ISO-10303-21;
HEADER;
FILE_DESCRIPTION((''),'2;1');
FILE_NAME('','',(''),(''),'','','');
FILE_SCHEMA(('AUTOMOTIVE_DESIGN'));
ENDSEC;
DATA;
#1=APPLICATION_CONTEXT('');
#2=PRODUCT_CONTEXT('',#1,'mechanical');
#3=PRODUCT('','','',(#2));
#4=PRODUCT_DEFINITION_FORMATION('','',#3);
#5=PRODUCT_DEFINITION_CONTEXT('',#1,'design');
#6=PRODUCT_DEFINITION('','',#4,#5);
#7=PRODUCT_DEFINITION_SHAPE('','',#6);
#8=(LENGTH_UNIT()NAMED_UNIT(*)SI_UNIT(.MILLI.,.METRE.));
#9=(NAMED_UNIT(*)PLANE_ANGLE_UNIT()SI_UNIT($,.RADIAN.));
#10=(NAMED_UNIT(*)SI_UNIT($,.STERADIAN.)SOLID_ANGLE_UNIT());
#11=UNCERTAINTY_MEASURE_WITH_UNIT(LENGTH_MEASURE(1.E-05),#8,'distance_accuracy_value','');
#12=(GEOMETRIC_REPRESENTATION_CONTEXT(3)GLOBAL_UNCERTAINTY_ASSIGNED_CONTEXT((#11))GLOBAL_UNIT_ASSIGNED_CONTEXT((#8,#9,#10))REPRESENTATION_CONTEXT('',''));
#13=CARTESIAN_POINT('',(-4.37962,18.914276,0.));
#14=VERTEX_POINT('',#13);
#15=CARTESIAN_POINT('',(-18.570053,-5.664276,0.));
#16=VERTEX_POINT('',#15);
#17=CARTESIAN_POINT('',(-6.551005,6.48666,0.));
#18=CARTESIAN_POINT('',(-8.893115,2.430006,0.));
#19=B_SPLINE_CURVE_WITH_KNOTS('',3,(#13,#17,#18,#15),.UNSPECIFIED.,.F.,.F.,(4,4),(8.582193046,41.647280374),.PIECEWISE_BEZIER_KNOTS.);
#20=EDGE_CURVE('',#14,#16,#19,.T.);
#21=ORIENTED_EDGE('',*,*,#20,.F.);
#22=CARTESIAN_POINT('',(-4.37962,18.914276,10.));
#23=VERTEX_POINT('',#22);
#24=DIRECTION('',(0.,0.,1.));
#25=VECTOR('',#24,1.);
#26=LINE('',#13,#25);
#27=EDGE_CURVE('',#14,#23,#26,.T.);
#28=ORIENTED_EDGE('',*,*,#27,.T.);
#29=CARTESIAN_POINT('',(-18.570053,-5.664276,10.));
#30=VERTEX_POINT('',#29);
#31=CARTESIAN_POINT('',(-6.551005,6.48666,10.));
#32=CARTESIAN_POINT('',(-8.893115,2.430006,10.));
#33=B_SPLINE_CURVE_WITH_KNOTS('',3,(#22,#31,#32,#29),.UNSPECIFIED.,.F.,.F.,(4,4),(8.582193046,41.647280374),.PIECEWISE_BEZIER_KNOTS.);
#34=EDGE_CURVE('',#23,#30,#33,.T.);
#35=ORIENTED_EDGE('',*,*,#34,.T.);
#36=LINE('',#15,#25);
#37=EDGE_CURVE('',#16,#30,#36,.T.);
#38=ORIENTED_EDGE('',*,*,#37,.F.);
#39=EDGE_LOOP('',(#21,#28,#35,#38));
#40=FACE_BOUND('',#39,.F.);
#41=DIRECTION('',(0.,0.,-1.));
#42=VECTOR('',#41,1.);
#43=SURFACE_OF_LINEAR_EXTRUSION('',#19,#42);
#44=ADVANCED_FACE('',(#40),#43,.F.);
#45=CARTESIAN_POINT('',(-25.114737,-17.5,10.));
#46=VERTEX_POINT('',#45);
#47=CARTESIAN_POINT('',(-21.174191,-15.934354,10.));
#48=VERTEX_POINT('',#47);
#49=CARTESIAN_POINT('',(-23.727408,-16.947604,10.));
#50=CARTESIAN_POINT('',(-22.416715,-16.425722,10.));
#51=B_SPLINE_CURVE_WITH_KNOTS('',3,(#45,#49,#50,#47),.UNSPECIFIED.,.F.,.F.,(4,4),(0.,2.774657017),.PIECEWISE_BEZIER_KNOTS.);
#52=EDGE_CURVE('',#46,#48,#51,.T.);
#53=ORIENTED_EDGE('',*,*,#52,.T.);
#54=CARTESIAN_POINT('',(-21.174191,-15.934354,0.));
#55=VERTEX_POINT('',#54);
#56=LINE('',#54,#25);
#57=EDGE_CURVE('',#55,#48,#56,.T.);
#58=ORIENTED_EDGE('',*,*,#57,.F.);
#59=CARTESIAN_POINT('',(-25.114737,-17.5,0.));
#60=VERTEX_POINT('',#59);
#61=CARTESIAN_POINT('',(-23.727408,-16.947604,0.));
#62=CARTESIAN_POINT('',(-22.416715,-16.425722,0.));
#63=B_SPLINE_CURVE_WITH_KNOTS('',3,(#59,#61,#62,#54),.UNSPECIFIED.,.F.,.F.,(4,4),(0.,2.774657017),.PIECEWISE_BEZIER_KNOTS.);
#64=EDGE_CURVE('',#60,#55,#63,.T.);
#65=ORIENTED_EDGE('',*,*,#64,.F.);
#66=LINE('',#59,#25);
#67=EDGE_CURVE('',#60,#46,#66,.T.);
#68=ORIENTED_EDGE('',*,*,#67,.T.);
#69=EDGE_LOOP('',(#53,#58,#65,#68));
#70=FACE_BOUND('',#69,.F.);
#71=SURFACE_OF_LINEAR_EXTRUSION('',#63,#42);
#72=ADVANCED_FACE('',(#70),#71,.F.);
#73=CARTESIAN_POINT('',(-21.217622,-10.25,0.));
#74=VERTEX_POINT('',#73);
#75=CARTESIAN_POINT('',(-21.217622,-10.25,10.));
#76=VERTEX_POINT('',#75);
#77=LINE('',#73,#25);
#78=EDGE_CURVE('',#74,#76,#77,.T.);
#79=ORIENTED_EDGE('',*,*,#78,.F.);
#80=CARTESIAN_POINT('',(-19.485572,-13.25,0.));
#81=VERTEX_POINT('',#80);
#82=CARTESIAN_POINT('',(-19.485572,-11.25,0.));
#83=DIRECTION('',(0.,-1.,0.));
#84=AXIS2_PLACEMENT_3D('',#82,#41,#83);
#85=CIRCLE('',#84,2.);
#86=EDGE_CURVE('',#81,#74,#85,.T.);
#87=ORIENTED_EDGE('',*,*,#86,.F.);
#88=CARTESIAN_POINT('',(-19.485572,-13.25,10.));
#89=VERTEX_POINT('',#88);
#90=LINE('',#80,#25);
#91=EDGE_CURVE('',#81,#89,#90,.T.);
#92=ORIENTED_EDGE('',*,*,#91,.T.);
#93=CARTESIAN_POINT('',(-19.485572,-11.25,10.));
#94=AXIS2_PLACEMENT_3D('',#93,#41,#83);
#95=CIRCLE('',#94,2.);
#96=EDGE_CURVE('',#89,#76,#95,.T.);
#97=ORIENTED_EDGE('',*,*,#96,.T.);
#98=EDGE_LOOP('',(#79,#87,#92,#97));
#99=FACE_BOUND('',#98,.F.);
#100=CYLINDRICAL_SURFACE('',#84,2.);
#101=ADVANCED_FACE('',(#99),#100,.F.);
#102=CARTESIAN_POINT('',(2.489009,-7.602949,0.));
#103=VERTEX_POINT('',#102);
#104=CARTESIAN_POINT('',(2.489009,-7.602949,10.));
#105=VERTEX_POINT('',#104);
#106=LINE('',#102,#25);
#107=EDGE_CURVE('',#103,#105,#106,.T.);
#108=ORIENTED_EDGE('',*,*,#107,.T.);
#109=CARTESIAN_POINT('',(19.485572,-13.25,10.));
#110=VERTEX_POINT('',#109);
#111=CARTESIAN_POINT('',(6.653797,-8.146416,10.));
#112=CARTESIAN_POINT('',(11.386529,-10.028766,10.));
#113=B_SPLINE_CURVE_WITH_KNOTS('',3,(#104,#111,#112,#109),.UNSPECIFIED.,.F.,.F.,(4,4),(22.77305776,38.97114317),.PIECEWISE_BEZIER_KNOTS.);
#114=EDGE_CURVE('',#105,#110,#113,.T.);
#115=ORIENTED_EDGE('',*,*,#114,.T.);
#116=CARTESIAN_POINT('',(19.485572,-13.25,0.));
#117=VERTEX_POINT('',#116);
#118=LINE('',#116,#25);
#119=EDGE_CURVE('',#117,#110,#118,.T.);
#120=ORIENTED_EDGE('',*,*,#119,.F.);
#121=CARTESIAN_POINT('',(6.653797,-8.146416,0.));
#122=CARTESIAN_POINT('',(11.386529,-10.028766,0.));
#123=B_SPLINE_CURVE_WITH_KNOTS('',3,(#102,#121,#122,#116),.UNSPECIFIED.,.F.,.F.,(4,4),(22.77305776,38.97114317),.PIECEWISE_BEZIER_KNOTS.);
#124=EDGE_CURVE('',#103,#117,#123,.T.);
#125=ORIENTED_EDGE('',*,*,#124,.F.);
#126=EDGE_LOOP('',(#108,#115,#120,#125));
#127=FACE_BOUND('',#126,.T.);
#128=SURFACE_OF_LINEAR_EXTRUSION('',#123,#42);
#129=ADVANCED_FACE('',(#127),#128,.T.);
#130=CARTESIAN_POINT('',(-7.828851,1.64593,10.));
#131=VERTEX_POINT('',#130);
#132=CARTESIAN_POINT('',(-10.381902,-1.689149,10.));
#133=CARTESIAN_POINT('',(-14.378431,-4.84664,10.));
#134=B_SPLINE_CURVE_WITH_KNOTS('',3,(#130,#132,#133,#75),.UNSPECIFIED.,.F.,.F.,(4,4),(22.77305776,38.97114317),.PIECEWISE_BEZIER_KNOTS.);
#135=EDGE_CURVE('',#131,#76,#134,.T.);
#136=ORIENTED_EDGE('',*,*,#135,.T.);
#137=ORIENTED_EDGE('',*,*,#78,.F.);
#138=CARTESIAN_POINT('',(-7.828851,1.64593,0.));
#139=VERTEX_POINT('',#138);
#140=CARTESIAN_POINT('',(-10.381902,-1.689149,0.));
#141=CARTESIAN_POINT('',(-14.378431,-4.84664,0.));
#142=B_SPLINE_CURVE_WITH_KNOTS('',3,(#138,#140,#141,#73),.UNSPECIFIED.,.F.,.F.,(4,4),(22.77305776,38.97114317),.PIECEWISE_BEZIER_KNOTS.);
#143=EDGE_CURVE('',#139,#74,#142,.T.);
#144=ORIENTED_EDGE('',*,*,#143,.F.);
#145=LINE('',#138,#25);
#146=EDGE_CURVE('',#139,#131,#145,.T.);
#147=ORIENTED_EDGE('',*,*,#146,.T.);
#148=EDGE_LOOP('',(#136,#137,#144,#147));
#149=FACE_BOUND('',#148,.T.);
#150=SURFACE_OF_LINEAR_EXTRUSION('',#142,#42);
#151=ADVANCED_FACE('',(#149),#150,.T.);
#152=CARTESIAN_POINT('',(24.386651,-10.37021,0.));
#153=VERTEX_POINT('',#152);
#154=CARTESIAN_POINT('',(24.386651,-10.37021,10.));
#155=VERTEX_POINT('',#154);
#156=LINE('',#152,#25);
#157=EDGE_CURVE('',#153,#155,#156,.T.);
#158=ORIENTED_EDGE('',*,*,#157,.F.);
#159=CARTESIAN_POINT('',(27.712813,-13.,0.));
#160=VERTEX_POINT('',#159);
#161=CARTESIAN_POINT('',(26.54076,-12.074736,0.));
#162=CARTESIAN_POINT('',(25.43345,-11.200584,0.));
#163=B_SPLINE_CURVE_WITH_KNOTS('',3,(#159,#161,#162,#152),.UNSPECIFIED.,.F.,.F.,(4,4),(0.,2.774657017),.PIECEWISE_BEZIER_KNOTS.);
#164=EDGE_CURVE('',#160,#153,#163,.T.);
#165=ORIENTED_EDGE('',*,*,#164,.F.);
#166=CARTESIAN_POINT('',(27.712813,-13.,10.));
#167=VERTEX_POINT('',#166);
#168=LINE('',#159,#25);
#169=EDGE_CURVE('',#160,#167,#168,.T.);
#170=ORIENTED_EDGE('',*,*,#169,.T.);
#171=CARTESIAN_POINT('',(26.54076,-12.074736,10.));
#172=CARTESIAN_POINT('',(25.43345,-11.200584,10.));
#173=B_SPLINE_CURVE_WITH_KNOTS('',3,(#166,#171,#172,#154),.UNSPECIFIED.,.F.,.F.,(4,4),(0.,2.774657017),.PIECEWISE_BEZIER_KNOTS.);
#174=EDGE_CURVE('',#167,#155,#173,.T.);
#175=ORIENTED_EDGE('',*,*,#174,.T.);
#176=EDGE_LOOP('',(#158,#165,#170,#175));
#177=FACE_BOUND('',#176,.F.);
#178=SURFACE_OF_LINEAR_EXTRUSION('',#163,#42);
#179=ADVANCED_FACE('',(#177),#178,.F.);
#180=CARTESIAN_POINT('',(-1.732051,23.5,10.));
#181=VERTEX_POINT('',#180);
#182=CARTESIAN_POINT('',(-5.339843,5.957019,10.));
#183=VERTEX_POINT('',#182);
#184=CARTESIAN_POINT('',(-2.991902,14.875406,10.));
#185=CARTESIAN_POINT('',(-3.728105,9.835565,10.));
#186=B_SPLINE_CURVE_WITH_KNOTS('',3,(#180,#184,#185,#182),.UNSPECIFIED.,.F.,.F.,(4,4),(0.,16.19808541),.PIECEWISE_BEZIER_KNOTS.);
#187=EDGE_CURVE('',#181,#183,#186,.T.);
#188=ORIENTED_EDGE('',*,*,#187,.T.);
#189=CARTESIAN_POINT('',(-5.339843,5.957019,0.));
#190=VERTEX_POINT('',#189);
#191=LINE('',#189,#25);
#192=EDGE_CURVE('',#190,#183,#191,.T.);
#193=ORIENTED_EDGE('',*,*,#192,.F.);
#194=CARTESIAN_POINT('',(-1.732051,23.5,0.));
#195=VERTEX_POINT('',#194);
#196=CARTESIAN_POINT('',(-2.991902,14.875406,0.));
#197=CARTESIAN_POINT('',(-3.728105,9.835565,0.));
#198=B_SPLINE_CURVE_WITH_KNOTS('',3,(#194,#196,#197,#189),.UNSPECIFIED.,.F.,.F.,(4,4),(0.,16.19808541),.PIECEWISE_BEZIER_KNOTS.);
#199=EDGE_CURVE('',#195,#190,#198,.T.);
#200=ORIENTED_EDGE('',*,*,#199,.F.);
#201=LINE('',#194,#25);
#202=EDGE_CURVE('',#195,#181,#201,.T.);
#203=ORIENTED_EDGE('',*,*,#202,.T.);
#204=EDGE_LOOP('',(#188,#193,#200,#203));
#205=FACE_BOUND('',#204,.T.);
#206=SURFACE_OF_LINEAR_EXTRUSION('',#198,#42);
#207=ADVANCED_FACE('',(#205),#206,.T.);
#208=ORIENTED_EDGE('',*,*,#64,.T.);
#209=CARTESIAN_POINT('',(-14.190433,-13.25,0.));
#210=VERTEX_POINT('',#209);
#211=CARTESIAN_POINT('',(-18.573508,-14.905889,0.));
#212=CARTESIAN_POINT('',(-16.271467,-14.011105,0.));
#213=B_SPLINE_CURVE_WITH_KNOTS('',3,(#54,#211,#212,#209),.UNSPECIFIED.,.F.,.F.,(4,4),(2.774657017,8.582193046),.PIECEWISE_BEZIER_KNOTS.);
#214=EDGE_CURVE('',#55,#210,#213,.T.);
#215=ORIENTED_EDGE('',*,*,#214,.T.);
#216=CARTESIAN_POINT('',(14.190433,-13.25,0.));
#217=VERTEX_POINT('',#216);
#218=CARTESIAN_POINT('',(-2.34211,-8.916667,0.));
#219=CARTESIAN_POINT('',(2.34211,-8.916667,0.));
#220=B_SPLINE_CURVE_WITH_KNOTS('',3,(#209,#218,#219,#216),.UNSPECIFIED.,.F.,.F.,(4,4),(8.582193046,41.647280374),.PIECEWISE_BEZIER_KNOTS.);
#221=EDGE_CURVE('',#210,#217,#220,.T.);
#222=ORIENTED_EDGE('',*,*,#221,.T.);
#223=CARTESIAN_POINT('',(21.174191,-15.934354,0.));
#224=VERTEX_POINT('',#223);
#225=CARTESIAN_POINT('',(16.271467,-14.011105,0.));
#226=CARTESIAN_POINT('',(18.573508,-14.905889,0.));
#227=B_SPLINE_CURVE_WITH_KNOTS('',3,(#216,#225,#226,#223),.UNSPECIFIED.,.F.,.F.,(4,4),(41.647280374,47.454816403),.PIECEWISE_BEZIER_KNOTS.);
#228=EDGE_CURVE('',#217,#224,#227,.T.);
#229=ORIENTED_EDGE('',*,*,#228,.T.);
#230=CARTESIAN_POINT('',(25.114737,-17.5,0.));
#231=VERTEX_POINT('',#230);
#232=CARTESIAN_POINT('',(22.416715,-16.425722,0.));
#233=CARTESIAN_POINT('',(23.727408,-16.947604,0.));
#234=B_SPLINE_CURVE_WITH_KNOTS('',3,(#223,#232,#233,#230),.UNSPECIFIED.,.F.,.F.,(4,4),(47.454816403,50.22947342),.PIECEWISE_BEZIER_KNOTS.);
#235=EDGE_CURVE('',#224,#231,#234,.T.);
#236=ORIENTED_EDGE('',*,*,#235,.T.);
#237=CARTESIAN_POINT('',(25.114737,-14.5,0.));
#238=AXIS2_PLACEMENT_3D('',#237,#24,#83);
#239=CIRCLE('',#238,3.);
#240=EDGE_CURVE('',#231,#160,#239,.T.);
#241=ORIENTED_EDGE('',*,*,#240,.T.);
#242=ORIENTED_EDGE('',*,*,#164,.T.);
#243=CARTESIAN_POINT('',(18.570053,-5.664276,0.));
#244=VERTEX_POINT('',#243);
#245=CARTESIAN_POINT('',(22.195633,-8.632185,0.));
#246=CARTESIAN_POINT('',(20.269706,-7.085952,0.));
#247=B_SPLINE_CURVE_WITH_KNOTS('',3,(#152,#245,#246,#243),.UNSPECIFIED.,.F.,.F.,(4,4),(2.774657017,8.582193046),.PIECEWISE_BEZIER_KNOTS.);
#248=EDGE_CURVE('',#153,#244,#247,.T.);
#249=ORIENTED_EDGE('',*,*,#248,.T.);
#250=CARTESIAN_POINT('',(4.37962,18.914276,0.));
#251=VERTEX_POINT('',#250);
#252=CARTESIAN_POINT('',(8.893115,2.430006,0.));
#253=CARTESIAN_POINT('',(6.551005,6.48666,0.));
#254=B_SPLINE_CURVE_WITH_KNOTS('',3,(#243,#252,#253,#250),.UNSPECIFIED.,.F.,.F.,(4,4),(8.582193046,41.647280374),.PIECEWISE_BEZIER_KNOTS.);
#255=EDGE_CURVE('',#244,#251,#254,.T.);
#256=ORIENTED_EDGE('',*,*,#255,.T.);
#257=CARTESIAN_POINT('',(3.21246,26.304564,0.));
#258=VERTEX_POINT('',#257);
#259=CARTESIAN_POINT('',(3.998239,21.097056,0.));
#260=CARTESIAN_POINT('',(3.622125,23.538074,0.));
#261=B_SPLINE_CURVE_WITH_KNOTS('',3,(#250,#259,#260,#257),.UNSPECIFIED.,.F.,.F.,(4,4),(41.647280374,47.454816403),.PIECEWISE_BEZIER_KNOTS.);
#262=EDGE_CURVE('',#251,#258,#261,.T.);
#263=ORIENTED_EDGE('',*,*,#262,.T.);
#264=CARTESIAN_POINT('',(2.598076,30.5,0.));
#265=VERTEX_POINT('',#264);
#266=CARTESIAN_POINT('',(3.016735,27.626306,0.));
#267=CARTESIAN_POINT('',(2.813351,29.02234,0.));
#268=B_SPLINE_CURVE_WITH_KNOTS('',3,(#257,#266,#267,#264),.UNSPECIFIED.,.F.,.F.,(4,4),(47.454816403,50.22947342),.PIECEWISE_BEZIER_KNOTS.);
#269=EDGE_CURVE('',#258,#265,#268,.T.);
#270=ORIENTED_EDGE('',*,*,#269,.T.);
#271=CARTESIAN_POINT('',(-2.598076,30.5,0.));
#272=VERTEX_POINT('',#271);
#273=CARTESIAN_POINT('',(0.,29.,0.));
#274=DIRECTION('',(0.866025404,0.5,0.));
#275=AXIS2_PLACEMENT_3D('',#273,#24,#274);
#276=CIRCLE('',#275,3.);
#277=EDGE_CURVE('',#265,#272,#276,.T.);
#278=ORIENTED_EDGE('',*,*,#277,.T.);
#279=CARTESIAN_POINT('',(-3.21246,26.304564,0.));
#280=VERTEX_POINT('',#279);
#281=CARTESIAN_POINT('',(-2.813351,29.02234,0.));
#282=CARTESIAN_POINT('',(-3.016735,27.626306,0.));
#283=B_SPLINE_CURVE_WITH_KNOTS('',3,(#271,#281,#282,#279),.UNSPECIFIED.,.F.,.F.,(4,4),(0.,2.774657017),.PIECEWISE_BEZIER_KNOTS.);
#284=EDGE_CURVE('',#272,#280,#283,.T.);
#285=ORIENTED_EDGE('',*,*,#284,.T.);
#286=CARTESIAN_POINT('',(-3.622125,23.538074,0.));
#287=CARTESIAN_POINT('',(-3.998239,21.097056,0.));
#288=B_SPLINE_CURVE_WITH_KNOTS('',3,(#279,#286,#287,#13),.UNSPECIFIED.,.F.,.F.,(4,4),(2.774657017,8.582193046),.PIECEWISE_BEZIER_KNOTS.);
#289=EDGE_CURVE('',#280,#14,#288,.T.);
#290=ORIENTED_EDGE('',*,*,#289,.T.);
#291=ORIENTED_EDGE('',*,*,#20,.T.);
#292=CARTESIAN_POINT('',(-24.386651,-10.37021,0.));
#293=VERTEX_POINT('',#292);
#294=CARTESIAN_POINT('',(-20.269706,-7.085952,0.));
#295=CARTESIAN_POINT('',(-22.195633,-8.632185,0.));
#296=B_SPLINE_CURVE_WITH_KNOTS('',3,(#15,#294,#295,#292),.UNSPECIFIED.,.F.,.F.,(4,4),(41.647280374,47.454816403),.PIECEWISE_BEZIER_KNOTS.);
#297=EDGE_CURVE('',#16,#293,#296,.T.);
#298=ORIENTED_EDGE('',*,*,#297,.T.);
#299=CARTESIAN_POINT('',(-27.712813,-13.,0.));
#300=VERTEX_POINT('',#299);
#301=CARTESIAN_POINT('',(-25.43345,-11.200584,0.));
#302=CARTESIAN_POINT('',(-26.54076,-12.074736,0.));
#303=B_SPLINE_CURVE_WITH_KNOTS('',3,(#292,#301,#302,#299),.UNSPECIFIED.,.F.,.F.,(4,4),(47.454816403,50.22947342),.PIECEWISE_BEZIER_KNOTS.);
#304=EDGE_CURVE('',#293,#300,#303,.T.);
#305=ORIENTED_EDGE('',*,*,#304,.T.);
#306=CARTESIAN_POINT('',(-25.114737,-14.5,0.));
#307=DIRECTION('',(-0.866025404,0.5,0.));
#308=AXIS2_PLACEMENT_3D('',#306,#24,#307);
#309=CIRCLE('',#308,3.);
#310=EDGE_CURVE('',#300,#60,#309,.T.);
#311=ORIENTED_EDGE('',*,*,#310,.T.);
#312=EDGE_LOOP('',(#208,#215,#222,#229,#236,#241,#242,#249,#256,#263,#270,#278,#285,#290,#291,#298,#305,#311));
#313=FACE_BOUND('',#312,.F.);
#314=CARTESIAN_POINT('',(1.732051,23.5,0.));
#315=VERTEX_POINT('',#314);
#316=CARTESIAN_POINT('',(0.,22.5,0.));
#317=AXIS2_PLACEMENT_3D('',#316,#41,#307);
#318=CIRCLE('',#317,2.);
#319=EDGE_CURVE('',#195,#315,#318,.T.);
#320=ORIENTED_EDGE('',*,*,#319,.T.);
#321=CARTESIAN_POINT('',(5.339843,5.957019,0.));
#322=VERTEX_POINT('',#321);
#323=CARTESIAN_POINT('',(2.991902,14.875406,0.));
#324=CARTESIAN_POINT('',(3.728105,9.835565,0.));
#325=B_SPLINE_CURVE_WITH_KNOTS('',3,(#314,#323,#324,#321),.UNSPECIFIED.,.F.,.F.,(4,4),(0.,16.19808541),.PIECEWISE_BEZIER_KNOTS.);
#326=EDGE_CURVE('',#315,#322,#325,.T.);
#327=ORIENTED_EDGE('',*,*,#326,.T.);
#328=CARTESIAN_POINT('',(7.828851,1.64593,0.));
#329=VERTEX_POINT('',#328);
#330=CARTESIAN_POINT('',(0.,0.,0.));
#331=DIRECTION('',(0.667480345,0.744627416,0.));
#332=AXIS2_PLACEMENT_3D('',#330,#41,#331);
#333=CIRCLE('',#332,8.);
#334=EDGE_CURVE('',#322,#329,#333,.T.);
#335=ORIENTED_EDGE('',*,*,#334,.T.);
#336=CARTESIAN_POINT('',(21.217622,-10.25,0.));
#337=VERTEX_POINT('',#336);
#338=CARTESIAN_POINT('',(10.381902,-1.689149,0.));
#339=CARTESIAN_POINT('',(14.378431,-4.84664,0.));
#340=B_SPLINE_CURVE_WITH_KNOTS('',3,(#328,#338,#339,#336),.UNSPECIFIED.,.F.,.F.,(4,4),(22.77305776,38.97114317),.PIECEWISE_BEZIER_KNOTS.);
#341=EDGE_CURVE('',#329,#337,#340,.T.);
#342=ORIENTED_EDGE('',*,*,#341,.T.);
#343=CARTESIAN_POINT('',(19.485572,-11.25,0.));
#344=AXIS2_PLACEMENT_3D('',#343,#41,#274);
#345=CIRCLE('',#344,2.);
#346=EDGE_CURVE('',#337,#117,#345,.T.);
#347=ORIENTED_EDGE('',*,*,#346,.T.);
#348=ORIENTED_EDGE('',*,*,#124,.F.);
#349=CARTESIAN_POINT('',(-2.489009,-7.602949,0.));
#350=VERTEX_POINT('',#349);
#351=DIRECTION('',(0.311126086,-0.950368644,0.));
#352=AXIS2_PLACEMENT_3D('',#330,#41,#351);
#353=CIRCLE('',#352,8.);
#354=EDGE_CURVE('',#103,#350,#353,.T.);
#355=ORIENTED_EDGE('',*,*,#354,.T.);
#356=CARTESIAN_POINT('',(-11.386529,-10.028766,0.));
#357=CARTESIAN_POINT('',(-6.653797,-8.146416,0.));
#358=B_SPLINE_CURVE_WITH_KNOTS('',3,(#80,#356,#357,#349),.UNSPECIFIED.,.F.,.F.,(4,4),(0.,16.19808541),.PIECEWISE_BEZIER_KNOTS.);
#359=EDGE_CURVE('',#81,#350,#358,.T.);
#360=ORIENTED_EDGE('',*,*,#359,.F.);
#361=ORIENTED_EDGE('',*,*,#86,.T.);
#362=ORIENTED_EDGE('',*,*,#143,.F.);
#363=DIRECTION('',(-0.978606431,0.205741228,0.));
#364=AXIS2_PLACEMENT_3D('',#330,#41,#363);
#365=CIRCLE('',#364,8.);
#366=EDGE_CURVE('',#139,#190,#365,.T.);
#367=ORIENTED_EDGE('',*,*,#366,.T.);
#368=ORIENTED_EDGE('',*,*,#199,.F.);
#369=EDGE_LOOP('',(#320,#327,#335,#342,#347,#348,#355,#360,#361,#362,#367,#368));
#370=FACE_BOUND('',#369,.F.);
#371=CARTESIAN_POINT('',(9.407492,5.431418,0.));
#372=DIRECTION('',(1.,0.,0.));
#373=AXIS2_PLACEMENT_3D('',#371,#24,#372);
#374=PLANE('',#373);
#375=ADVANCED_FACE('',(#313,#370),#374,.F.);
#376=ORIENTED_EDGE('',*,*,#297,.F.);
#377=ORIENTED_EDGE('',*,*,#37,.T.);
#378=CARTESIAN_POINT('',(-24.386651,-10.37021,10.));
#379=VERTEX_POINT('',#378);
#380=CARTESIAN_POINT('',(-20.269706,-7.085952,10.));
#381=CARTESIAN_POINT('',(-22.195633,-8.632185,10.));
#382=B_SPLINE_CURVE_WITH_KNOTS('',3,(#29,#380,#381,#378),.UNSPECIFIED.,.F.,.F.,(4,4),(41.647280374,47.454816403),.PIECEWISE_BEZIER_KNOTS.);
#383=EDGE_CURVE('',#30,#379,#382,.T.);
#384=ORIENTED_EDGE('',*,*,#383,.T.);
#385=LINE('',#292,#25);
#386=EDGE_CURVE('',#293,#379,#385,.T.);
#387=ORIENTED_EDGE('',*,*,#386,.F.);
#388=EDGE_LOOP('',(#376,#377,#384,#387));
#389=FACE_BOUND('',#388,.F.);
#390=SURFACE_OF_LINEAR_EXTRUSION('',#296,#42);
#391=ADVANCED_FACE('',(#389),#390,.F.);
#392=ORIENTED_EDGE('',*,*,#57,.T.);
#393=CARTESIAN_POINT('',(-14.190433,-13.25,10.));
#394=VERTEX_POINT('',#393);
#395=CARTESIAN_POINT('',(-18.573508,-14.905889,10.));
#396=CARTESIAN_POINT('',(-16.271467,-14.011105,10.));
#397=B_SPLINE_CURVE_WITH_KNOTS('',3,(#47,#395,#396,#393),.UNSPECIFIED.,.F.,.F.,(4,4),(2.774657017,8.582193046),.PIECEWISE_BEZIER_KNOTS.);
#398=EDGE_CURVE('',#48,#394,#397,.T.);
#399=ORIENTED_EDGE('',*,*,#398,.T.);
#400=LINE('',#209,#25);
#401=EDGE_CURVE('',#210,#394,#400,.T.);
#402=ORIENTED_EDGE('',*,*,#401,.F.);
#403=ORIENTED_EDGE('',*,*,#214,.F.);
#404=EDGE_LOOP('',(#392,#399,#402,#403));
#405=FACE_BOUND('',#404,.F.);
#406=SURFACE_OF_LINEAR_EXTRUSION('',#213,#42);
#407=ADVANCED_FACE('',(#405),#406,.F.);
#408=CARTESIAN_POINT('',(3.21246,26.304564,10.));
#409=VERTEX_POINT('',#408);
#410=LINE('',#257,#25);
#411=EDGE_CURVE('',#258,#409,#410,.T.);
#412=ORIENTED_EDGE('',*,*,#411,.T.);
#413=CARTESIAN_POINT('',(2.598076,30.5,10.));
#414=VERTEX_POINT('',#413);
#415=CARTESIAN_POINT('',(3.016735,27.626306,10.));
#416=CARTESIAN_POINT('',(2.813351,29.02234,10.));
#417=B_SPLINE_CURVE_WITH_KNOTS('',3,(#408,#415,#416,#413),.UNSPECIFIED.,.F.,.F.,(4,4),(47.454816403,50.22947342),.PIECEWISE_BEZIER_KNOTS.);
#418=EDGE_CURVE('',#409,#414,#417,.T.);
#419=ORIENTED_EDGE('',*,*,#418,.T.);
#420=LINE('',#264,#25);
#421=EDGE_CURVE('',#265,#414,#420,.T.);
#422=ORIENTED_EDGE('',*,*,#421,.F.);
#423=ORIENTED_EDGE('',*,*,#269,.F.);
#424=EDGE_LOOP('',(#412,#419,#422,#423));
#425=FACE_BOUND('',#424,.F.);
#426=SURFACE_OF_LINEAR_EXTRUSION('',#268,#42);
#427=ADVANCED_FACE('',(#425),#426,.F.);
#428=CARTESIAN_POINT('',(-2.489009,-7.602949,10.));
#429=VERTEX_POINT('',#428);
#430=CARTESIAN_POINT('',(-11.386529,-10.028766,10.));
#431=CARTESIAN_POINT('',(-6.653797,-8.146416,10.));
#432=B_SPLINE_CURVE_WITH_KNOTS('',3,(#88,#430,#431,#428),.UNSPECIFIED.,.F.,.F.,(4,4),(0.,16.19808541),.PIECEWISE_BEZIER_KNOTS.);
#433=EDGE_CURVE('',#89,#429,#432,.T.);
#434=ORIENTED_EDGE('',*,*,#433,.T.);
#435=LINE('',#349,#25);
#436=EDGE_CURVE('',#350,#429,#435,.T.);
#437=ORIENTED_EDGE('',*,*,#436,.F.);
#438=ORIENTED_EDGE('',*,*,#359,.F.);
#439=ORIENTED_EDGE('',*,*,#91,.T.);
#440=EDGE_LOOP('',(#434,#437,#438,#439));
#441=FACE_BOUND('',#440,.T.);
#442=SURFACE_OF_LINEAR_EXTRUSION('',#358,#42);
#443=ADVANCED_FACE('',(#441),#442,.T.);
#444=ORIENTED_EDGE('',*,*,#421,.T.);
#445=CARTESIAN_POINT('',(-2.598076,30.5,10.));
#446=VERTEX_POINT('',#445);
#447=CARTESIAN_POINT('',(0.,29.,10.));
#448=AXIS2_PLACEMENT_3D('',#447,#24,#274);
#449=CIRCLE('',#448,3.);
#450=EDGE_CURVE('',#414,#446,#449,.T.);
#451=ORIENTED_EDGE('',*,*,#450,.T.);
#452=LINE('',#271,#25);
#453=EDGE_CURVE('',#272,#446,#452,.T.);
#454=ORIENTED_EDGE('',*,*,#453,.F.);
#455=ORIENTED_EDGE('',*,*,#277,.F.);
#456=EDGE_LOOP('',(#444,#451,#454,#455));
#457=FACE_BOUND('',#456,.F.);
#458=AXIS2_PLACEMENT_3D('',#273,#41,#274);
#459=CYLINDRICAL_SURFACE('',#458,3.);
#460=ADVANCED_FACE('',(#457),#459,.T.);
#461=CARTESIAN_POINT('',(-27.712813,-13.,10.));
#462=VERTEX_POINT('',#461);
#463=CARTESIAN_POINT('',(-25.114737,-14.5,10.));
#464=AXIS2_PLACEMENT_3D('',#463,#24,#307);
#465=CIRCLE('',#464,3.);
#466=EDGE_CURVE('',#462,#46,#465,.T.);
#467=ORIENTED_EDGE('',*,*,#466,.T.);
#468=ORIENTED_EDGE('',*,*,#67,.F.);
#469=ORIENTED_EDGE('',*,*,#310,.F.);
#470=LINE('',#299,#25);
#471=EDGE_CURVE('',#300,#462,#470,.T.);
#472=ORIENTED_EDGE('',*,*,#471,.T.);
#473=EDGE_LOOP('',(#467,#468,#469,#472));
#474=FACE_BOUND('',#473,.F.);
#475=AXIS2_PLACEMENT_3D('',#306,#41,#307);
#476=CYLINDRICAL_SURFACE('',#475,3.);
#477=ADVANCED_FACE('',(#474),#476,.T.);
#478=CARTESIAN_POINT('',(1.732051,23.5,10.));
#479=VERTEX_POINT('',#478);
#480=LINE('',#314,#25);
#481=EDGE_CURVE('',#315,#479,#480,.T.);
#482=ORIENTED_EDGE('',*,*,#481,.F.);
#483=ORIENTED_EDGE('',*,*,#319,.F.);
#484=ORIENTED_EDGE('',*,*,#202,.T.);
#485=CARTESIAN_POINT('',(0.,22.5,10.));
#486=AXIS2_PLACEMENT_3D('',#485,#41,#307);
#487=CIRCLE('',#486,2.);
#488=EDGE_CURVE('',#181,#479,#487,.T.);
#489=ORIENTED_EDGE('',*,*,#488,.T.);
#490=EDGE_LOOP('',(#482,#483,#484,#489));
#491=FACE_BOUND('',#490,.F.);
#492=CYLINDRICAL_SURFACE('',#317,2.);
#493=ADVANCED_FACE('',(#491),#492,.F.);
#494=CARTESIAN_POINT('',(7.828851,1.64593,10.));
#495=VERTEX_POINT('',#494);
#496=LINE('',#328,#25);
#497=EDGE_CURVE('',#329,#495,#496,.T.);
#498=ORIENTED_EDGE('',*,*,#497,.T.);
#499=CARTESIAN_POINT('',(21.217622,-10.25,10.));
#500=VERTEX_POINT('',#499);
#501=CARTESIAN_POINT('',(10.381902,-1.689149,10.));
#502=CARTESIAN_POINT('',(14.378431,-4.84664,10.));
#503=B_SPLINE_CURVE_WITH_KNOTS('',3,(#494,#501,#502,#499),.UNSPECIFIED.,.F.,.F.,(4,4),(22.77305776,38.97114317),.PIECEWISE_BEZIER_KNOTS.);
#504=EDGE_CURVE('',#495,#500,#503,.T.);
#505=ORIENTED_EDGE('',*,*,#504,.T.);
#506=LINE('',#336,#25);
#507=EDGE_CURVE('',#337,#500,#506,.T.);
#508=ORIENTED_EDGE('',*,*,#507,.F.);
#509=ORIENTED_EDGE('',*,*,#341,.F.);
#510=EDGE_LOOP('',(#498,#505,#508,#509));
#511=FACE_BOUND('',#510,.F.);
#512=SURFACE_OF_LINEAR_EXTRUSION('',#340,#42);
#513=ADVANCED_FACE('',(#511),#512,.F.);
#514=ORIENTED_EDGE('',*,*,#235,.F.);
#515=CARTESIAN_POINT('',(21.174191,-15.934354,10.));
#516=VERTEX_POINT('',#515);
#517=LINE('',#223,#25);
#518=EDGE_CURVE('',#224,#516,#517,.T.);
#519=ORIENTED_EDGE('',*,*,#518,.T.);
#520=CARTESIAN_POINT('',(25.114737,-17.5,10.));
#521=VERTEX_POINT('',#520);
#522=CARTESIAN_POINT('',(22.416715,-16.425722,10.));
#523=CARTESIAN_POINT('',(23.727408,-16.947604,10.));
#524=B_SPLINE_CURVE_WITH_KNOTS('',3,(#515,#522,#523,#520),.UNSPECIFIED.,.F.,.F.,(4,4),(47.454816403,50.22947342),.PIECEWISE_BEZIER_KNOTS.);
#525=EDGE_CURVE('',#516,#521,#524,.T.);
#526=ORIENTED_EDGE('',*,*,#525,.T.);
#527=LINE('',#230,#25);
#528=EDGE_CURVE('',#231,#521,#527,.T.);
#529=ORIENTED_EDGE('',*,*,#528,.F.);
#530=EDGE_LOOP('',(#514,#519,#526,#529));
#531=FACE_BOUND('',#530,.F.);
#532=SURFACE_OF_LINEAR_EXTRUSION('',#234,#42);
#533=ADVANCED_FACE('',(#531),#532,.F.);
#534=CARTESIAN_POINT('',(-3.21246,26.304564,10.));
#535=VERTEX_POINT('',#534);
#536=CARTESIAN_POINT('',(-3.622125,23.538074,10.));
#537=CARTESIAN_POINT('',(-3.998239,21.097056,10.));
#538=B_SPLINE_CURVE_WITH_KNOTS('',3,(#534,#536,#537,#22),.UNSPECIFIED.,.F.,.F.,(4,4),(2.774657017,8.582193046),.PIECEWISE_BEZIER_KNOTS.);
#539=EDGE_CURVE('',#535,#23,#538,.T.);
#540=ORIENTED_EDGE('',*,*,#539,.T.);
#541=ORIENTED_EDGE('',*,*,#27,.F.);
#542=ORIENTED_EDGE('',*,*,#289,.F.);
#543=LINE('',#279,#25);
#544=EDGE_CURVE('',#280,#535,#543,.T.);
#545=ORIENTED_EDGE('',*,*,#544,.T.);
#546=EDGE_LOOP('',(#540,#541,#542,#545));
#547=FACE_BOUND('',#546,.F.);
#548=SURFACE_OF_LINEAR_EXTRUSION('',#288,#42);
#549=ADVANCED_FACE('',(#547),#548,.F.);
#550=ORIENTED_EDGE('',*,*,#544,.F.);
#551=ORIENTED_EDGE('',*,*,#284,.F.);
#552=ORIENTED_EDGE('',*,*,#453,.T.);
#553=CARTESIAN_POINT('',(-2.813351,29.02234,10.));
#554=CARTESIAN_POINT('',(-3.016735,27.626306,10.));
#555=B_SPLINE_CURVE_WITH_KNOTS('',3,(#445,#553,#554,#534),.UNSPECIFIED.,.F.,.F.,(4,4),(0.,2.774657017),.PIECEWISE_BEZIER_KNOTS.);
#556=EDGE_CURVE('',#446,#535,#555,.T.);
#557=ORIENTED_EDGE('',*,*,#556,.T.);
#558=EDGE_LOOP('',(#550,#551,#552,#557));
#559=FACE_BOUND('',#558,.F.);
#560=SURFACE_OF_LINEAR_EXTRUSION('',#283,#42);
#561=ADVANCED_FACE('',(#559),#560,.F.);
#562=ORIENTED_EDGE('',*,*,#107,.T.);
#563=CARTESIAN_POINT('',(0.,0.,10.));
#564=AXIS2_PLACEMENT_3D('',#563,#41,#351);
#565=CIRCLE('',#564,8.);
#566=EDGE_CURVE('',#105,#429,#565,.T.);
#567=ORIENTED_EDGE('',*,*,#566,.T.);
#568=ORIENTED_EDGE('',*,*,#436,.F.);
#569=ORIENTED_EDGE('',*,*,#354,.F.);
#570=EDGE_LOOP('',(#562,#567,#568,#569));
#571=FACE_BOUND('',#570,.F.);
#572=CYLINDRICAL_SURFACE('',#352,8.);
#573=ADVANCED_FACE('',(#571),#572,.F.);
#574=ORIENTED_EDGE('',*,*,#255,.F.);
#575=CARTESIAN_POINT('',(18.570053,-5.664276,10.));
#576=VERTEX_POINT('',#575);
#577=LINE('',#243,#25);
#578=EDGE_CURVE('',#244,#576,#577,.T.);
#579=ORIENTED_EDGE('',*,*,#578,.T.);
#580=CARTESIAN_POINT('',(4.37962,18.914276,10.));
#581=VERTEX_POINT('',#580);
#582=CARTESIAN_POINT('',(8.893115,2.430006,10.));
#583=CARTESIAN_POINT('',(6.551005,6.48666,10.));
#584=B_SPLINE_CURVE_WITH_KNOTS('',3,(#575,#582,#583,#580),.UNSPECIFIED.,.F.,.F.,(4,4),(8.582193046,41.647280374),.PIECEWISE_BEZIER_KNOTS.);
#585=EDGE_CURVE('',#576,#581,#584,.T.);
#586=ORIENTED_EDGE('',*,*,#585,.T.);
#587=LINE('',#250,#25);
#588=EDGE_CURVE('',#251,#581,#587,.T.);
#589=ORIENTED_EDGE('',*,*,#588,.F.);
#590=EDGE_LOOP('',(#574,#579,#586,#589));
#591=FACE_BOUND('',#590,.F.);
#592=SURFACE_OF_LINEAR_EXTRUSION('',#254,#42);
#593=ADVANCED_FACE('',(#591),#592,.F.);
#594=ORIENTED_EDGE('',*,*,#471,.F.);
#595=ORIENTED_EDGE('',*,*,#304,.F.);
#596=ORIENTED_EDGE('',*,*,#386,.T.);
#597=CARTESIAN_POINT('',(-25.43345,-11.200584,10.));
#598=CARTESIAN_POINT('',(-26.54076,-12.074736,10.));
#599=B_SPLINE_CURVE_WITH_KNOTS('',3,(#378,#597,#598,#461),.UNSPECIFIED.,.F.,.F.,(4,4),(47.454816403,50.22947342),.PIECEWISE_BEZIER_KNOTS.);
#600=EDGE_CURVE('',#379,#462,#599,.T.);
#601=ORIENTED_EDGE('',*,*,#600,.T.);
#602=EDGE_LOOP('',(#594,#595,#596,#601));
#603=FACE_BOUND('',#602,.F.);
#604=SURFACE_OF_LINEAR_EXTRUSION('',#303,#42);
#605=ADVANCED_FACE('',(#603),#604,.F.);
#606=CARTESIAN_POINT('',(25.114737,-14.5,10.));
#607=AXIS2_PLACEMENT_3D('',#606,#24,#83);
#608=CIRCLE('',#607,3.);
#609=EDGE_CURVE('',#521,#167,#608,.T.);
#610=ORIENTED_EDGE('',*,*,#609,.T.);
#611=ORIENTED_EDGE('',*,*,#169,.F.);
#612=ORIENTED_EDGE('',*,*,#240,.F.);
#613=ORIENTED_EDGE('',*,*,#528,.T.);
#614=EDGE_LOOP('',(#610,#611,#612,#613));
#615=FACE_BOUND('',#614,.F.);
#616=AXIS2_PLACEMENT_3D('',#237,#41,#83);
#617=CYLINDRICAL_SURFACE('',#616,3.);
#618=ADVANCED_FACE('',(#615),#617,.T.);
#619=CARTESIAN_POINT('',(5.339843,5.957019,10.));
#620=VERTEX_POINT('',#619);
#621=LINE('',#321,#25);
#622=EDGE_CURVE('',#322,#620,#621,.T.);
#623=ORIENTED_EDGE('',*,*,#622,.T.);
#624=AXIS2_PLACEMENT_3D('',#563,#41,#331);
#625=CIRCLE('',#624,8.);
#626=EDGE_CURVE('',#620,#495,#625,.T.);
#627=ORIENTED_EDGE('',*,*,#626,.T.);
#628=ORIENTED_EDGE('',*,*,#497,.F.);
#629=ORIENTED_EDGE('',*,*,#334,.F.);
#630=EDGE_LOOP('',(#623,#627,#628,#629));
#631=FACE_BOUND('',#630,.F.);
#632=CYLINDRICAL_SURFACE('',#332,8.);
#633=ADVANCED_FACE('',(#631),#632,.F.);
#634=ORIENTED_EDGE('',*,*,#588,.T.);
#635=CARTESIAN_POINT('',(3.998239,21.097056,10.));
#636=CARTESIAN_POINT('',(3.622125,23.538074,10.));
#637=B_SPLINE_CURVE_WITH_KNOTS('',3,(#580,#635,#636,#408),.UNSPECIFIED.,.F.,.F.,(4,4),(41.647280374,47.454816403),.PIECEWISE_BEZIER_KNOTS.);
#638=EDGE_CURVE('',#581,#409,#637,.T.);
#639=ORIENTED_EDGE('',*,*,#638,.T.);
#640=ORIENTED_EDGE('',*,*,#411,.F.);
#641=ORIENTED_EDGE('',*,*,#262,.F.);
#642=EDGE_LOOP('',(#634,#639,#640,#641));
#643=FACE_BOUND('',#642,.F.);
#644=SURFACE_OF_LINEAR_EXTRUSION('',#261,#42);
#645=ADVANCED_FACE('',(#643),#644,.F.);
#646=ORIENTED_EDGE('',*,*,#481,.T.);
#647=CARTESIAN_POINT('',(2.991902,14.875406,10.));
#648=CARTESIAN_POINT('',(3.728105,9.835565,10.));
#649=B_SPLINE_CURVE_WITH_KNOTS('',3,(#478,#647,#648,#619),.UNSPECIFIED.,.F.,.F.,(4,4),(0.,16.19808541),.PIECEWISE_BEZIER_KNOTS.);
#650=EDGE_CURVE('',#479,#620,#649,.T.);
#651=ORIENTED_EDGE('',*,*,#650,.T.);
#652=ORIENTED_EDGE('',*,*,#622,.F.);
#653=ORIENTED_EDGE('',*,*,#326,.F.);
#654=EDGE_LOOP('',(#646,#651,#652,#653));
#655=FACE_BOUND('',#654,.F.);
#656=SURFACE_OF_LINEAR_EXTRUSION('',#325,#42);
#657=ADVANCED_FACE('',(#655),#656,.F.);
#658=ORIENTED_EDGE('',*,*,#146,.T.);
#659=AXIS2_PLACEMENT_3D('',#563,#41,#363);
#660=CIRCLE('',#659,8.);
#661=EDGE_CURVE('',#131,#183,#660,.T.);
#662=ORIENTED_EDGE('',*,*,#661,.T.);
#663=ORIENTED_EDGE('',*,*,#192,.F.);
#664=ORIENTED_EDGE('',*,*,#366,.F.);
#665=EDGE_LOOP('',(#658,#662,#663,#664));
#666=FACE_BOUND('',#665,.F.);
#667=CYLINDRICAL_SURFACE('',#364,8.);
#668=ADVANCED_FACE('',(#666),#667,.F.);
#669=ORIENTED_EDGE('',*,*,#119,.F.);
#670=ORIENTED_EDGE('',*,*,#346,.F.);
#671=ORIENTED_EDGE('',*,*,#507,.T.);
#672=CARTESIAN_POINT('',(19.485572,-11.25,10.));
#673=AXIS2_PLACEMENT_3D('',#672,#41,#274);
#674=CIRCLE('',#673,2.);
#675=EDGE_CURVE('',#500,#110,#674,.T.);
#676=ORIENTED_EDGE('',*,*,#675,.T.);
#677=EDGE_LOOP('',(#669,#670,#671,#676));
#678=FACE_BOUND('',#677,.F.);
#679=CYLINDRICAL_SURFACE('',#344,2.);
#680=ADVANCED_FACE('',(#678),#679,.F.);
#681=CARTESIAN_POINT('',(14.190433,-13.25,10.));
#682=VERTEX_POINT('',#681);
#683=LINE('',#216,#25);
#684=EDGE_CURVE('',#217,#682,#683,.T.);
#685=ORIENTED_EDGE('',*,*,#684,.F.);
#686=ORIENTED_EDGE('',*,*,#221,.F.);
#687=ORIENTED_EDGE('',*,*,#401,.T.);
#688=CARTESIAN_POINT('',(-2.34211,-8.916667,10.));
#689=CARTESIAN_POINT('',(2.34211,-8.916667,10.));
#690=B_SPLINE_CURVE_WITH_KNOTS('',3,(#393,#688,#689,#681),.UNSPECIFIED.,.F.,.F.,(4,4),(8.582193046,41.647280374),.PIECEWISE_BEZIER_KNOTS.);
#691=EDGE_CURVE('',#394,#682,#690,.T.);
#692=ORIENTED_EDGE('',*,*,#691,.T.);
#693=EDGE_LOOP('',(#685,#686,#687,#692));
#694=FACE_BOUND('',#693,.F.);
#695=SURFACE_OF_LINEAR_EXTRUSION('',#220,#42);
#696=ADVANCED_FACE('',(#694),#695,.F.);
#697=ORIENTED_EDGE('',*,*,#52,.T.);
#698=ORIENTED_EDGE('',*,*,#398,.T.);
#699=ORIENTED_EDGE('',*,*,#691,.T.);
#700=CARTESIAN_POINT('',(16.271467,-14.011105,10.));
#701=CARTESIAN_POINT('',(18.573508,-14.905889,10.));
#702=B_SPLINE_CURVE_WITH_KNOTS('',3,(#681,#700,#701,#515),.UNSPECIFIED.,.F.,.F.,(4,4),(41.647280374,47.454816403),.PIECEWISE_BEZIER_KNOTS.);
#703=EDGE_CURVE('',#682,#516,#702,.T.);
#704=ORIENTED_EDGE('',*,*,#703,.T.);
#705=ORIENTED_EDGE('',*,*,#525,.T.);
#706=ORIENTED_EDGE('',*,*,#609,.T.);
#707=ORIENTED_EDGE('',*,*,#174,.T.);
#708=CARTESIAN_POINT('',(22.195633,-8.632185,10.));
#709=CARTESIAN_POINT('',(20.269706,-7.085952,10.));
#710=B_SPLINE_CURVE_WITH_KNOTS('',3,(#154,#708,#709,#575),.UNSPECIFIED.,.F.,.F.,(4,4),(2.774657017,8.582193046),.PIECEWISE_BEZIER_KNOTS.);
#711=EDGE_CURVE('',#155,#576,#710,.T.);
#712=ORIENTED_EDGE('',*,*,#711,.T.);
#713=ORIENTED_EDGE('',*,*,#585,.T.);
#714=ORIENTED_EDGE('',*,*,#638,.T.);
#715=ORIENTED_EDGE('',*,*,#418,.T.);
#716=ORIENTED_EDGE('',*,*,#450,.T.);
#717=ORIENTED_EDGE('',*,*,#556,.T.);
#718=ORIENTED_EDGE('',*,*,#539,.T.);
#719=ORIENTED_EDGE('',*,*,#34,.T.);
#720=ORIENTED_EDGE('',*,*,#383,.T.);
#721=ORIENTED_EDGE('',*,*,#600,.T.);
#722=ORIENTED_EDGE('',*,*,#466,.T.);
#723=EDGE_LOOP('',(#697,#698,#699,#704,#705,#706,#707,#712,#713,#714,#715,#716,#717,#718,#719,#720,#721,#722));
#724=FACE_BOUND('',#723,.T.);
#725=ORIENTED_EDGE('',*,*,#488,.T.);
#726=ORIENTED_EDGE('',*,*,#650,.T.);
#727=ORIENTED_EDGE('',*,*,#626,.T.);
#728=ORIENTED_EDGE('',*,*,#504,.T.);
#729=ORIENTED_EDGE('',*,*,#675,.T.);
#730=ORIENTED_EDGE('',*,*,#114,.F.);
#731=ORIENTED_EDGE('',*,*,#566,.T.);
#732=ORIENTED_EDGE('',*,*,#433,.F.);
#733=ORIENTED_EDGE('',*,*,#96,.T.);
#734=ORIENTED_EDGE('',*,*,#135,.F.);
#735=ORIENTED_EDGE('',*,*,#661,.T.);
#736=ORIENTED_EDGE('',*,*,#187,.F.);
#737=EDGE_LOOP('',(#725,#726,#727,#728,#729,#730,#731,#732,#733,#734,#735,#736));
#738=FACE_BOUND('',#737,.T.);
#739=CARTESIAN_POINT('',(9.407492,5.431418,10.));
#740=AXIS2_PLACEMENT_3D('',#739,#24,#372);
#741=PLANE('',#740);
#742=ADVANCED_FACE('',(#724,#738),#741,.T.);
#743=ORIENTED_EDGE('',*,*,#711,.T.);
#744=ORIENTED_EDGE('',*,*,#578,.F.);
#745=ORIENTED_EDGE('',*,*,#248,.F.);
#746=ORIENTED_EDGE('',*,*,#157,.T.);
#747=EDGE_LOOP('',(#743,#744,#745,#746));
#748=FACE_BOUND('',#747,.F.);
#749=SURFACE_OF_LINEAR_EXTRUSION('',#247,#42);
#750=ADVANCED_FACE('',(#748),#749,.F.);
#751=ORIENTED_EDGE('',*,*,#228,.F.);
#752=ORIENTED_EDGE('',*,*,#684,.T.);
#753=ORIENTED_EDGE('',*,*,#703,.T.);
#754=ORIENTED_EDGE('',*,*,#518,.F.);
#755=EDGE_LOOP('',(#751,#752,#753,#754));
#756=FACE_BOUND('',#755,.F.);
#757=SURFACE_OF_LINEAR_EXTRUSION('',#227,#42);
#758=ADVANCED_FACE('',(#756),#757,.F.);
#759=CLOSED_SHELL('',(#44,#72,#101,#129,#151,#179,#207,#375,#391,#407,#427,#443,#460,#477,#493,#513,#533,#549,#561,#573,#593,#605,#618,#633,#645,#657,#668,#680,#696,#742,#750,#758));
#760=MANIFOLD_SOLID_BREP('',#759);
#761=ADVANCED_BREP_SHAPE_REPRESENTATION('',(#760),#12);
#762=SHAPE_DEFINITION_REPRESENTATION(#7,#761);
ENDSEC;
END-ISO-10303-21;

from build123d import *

# Parameters (mm, degrees)
F1_DEPTH = 10


# Not quite as in the source:
# - a feature of the source that left no trace in its solid (it failed there, or was rolled back) is left out


with BuildPart() as f1:
    # F0 (on Top) → F1 (new body)
    with BuildSketch(Plane.XY):
        with BuildLine():
            ThreePointArc((5.3398427629, 5.9570193274), (6.9282032303, 4), (7.8288514498, 1.6459298212))
            add(Edge.make_bspline(
                [(7.8288514498, 1.6459298212), (10.3819017266, -1.689149351), (14.3784307752, -4.8466401497), (21.2176223927, -10.25)],
                knots=[22.7730577605, 22.7730577605, 22.7730577605, 22.7730577605, 38.9711431703, 38.9711431703, 38.9711431703, 38.9711431703], degree=3))
            Line((21.2176223927, -10.25), (18.5700532559, -5.6642757385))
            add(Edge.make_bspline(
                [(18.5700532559, -5.6642757385), (8.8931150266, 2.4300062697), (6.5510046742, 6.486660397), (4.3796199444, 18.9142757385)],
                knots=[8.5821930458, 8.5821930458, 8.5821930458, 8.5821930458, 41.6472803737, 41.6472803737, 41.6472803737, 41.6472803737], degree=3))
            Line((4.3796199444, 18.9142757385), (1.7320508076, 23.5))
            add(Edge.make_bspline(
                [(1.7320508076, 23.5), (2.991901895, 14.8754063927), (3.7281046145, 9.8355653103), (5.3398427629, 5.9570193274)],
                knots=[0, 0, 0, 0, 16.1980854098, 16.1980854098, 16.1980854098, 16.1980854098], degree=3))
        make_face()
        with BuildLine():
            add(Edge.make_bspline(
                [(2.4890086869, -7.6029491486), (6.6537971121, -8.1464159593), (11.3865288802, -10.0287662431), (19.4855715851, -13.25)],
                knots=[22.7730577605, 22.7730577605, 22.7730577605, 22.7730577605, 38.9711431703, 38.9711431703, 38.9711431703, 38.9711431703], degree=3))
            ThreePointArc((2.4890086869, -7.6029491486), (0, -8), (-2.4890086869, -7.6029491486))
            add(Edge.make_bspline(
                [(-19.4855715852, -13.25), (-11.3865288802, -10.0287662431), (-6.6537971121, -8.1464159593), (-2.4890086869, -7.6029491486)],
                knots=[0, 0, 0, 0, 16.1980854098, 16.1980854098, 16.1980854098, 16.1980854098], degree=3))
            Line((-19.4855715852, -13.25), (-14.1904333115, -13.25))
            add(Edge.make_bspline(
                [(-14.1904333115, -13.25), (-2.3421103524, -8.9166666667), (2.3421103524, -8.9166666667), (14.1904333115, -13.25)],
                knots=[8.5821930458, 8.5821930458, 8.5821930458, 8.5821930458, 41.6472803737, 41.6472803737, 41.6472803737, 41.6472803737], degree=3))
            Line((14.1904333115, -13.25), (19.4855715851, -13.25))
        make_face()
        with BuildLine():
            Line((18.5700532559, -5.6642757385), (21.2176223927, -10.25))
            ThreePointArc((21.2176223927, -10.25), (21.2176223927, -12.25), (19.4855715851, -13.25))
            Line((19.4855715851, -13.25), (14.1904333115, -13.25))
            add(Edge.make_bspline(
                [(14.1904333115, -13.25), (16.2714670553, -14.0111045817), (18.573507913, -14.9058892059), (21.174191051, -15.9343538726)],
                knots=[41.6472803737, 41.6472803737, 41.6472803737, 41.6472803737, 47.4548164026, 47.4548164026, 47.4548164026, 47.4548164026], degree=3))
            ThreePointArc((21.174191051, -15.9343538726), (22.9496732003, -13.25), (24.386650772, -10.3702104184))
            add(Edge.make_bspline(
                [(24.386650772, -10.3702104184), (22.1956326748, -8.6321850871), (20.2697060304, -7.0859515359), (18.5700532559, -5.6642757385)],
                knots=[2.7746570169, 2.7746570169, 2.7746570169, 2.7746570169, 8.5821930458, 8.5821930458, 8.5821930458, 8.5821930458], degree=3))
        make_face()
        with BuildLine():
            ThreePointArc((-7.8288514498, 1.6459298212), (-6.9282032303, 4), (-5.3398427629, 5.9570193274))
            add(Edge.make_bspline(
                [(-1.7320508076, 23.5), (-2.991901895, 14.8754063927), (-3.7281046145, 9.8355653103), (-5.3398427629, 5.9570193274)],
                knots=[0, 0, 0, 0, 16.1980854098, 16.1980854098, 16.1980854098, 16.1980854098], degree=3))
            Line((-1.7320508076, 23.5), (-4.3796199444, 18.9142757385))
            add(Edge.make_bspline(
                [(-4.3796199444, 18.9142757385), (-6.5510046742, 6.486660397), (-8.8931150266, 2.4300062697), (-18.5700532559, -5.6642757385)],
                knots=[8.5821930458, 8.5821930458, 8.5821930458, 8.5821930458, 41.6472803737, 41.6472803737, 41.6472803737, 41.6472803737], degree=3))
            Line((-18.5700532559, -5.6642757385), (-21.2176223927, -10.25))
            add(Edge.make_bspline(
                [(-7.8288514498, 1.6459298212), (-10.3819017266, -1.689149351), (-14.3784307752, -4.8466401497), (-21.2176223927, -10.25)],
                knots=[22.7730577605, 22.7730577605, 22.7730577605, 22.7730577605, 38.9711431703, 38.9711431703, 38.9711431703, 38.9711431703], degree=3))
        make_face()
        with BuildLine():
            ThreePointArc((-1.7320508076, 23.5), (0, 24.5), (1.7320508076, 23.5))
            Line((1.7320508076, 23.5), (4.3796199444, 18.9142757385))
            add(Edge.make_bspline(
                [(4.3796199444, 18.9142757385), (3.9982389752, 21.0970561175), (3.6221247618, 23.5380742929), (3.2124597211, 26.304564291)],
                knots=[41.6472803737, 41.6472803737, 41.6472803737, 41.6472803737, 47.4548164026, 47.4548164026, 47.4548164026, 47.4548164026], degree=3))
            ThreePointArc((3.2124597211, 26.304564291), (0, 26.5), (-3.2124597211, 26.304564291))
            add(Edge.make_bspline(
                [(-3.2124597211, 26.304564291), (-3.6221247618, 23.5380742929), (-3.9982389752, 21.0970561175), (-4.3796199444, 18.9142757385)],
                knots=[2.7746570169, 2.7746570169, 2.7746570169, 2.7746570169, 8.5821930458, 8.5821930458, 8.5821930458, 8.5821930458], degree=3))
            Line((-4.3796199444, 18.9142757385), (-1.7320508076, 23.5))
        make_face()
        with BuildLine():
            Line((-14.1904333115, -13.25), (-19.4855715852, -13.25))
            ThreePointArc((-19.4855715852, -13.25), (-21.2176223927, -12.25), (-21.2176223927, -10.25))
            Line((-21.2176223927, -10.25), (-18.5700532559, -5.6642757385))
            add(Edge.make_bspline(
                [(-18.5700532559, -5.6642757385), (-20.2697060304, -7.0859515359), (-22.1956326748, -8.6321850871), (-24.386650772, -10.3702104184)],
                knots=[41.6472803737, 41.6472803737, 41.6472803737, 41.6472803737, 47.4548164026, 47.4548164026, 47.4548164026, 47.4548164026], degree=3))
            ThreePointArc((-24.386650772, -10.3702104184), (-22.9496732003, -13.25), (-21.174191051, -15.9343538726))
            add(Edge.make_bspline(
                [(-21.174191051, -15.9343538726), (-18.573507913, -14.9058892059), (-16.2714670553, -14.0111045817), (-14.1904333115, -13.25)],
                knots=[2.7746570169, 2.7746570169, 2.7746570169, 2.7746570169, 8.5821930458, 8.5821930458, 8.5821930458, 8.5821930458], degree=3))
        make_face()
        with BuildLine():
            add(Edge.make_bspline(
                [(27.7128129211, -13), (26.540759526, -12.0747363675), (25.433449915, -11.2005839464), (24.386650772, -10.3702104184)],
                knots=[0, 0, 0, 0, 2.7746570169, 2.7746570169, 2.7746570169, 2.7746570169], degree=3))
            ThreePointArc((24.386650772, -10.3702104184), (22.9496732003, -13.25), (21.174191051, -15.9343538726))
            add(Edge.make_bspline(
                [(21.174191051, -15.9343538726), (22.4167151923, -16.425721759), (23.7274082013, -16.9476038015), (25.1147367097, -17.5)],
                knots=[47.4548164026, 47.4548164026, 47.4548164026, 47.4548164026, 50.2294734195, 50.2294734195, 50.2294734195, 50.2294734195], degree=3))
            ThreePointArc((25.1147367097, -17.5), (27.7128129211, -16), (27.7128129211, -13))
        make_face()
        with BuildLine():
            ThreePointArc((-3.2124597211, 26.304564291), (0, 26.5), (3.2124597211, 26.304564291))
            add(Edge.make_bspline(
                [(3.2124597211, 26.304564291), (3.0167347227, 27.6263057055), (2.8133513247, 29.0223401691), (2.5980762114, 30.5)],
                knots=[47.4548164026, 47.4548164026, 47.4548164026, 47.4548164026, 50.2294734195, 50.2294734195, 50.2294734195, 50.2294734195], degree=3))
            ThreePointArc((2.5980762114, 30.5), (0, 32), (-2.5980762114, 30.5))
            add(Edge.make_bspline(
                [(-2.5980762114, 30.5), (-2.8133513247, 29.0223401691), (-3.0167347227, 27.6263057055), (-3.2124597211, 26.304564291)],
                knots=[0, 0, 0, 0, 2.7746570169, 2.7746570169, 2.7746570169, 2.7746570169], degree=3))
        make_face()
        with BuildLine():
            add(Edge.make_bspline(
                [(-25.1147367097, -17.5), (-23.7274082013, -16.9476038015), (-22.4167151923, -16.425721759), (-21.174191051, -15.9343538726)],
                knots=[0, 0, 0, 0, 2.7746570169, 2.7746570169, 2.7746570169, 2.7746570169], degree=3))
            ThreePointArc((-21.174191051, -15.9343538726), (-22.9496732003, -13.25), (-24.386650772, -10.3702104184))
            add(Edge.make_bspline(
                [(-24.386650772, -10.3702104184), (-25.433449915, -11.2005839464), (-26.540759526, -12.0747363675), (-27.7128129211, -13)],
                knots=[47.4548164026, 47.4548164026, 47.4548164026, 47.4548164026, 50.2294734195, 50.2294734195, 50.2294734195, 50.2294734195], degree=3))
            ThreePointArc((-27.7128129211, -13), (-27.7128129211, -16), (-25.1147367097, -17.5))
        make_face()
    extrude(amount=F1_DEPTH)


solid = f1.part
